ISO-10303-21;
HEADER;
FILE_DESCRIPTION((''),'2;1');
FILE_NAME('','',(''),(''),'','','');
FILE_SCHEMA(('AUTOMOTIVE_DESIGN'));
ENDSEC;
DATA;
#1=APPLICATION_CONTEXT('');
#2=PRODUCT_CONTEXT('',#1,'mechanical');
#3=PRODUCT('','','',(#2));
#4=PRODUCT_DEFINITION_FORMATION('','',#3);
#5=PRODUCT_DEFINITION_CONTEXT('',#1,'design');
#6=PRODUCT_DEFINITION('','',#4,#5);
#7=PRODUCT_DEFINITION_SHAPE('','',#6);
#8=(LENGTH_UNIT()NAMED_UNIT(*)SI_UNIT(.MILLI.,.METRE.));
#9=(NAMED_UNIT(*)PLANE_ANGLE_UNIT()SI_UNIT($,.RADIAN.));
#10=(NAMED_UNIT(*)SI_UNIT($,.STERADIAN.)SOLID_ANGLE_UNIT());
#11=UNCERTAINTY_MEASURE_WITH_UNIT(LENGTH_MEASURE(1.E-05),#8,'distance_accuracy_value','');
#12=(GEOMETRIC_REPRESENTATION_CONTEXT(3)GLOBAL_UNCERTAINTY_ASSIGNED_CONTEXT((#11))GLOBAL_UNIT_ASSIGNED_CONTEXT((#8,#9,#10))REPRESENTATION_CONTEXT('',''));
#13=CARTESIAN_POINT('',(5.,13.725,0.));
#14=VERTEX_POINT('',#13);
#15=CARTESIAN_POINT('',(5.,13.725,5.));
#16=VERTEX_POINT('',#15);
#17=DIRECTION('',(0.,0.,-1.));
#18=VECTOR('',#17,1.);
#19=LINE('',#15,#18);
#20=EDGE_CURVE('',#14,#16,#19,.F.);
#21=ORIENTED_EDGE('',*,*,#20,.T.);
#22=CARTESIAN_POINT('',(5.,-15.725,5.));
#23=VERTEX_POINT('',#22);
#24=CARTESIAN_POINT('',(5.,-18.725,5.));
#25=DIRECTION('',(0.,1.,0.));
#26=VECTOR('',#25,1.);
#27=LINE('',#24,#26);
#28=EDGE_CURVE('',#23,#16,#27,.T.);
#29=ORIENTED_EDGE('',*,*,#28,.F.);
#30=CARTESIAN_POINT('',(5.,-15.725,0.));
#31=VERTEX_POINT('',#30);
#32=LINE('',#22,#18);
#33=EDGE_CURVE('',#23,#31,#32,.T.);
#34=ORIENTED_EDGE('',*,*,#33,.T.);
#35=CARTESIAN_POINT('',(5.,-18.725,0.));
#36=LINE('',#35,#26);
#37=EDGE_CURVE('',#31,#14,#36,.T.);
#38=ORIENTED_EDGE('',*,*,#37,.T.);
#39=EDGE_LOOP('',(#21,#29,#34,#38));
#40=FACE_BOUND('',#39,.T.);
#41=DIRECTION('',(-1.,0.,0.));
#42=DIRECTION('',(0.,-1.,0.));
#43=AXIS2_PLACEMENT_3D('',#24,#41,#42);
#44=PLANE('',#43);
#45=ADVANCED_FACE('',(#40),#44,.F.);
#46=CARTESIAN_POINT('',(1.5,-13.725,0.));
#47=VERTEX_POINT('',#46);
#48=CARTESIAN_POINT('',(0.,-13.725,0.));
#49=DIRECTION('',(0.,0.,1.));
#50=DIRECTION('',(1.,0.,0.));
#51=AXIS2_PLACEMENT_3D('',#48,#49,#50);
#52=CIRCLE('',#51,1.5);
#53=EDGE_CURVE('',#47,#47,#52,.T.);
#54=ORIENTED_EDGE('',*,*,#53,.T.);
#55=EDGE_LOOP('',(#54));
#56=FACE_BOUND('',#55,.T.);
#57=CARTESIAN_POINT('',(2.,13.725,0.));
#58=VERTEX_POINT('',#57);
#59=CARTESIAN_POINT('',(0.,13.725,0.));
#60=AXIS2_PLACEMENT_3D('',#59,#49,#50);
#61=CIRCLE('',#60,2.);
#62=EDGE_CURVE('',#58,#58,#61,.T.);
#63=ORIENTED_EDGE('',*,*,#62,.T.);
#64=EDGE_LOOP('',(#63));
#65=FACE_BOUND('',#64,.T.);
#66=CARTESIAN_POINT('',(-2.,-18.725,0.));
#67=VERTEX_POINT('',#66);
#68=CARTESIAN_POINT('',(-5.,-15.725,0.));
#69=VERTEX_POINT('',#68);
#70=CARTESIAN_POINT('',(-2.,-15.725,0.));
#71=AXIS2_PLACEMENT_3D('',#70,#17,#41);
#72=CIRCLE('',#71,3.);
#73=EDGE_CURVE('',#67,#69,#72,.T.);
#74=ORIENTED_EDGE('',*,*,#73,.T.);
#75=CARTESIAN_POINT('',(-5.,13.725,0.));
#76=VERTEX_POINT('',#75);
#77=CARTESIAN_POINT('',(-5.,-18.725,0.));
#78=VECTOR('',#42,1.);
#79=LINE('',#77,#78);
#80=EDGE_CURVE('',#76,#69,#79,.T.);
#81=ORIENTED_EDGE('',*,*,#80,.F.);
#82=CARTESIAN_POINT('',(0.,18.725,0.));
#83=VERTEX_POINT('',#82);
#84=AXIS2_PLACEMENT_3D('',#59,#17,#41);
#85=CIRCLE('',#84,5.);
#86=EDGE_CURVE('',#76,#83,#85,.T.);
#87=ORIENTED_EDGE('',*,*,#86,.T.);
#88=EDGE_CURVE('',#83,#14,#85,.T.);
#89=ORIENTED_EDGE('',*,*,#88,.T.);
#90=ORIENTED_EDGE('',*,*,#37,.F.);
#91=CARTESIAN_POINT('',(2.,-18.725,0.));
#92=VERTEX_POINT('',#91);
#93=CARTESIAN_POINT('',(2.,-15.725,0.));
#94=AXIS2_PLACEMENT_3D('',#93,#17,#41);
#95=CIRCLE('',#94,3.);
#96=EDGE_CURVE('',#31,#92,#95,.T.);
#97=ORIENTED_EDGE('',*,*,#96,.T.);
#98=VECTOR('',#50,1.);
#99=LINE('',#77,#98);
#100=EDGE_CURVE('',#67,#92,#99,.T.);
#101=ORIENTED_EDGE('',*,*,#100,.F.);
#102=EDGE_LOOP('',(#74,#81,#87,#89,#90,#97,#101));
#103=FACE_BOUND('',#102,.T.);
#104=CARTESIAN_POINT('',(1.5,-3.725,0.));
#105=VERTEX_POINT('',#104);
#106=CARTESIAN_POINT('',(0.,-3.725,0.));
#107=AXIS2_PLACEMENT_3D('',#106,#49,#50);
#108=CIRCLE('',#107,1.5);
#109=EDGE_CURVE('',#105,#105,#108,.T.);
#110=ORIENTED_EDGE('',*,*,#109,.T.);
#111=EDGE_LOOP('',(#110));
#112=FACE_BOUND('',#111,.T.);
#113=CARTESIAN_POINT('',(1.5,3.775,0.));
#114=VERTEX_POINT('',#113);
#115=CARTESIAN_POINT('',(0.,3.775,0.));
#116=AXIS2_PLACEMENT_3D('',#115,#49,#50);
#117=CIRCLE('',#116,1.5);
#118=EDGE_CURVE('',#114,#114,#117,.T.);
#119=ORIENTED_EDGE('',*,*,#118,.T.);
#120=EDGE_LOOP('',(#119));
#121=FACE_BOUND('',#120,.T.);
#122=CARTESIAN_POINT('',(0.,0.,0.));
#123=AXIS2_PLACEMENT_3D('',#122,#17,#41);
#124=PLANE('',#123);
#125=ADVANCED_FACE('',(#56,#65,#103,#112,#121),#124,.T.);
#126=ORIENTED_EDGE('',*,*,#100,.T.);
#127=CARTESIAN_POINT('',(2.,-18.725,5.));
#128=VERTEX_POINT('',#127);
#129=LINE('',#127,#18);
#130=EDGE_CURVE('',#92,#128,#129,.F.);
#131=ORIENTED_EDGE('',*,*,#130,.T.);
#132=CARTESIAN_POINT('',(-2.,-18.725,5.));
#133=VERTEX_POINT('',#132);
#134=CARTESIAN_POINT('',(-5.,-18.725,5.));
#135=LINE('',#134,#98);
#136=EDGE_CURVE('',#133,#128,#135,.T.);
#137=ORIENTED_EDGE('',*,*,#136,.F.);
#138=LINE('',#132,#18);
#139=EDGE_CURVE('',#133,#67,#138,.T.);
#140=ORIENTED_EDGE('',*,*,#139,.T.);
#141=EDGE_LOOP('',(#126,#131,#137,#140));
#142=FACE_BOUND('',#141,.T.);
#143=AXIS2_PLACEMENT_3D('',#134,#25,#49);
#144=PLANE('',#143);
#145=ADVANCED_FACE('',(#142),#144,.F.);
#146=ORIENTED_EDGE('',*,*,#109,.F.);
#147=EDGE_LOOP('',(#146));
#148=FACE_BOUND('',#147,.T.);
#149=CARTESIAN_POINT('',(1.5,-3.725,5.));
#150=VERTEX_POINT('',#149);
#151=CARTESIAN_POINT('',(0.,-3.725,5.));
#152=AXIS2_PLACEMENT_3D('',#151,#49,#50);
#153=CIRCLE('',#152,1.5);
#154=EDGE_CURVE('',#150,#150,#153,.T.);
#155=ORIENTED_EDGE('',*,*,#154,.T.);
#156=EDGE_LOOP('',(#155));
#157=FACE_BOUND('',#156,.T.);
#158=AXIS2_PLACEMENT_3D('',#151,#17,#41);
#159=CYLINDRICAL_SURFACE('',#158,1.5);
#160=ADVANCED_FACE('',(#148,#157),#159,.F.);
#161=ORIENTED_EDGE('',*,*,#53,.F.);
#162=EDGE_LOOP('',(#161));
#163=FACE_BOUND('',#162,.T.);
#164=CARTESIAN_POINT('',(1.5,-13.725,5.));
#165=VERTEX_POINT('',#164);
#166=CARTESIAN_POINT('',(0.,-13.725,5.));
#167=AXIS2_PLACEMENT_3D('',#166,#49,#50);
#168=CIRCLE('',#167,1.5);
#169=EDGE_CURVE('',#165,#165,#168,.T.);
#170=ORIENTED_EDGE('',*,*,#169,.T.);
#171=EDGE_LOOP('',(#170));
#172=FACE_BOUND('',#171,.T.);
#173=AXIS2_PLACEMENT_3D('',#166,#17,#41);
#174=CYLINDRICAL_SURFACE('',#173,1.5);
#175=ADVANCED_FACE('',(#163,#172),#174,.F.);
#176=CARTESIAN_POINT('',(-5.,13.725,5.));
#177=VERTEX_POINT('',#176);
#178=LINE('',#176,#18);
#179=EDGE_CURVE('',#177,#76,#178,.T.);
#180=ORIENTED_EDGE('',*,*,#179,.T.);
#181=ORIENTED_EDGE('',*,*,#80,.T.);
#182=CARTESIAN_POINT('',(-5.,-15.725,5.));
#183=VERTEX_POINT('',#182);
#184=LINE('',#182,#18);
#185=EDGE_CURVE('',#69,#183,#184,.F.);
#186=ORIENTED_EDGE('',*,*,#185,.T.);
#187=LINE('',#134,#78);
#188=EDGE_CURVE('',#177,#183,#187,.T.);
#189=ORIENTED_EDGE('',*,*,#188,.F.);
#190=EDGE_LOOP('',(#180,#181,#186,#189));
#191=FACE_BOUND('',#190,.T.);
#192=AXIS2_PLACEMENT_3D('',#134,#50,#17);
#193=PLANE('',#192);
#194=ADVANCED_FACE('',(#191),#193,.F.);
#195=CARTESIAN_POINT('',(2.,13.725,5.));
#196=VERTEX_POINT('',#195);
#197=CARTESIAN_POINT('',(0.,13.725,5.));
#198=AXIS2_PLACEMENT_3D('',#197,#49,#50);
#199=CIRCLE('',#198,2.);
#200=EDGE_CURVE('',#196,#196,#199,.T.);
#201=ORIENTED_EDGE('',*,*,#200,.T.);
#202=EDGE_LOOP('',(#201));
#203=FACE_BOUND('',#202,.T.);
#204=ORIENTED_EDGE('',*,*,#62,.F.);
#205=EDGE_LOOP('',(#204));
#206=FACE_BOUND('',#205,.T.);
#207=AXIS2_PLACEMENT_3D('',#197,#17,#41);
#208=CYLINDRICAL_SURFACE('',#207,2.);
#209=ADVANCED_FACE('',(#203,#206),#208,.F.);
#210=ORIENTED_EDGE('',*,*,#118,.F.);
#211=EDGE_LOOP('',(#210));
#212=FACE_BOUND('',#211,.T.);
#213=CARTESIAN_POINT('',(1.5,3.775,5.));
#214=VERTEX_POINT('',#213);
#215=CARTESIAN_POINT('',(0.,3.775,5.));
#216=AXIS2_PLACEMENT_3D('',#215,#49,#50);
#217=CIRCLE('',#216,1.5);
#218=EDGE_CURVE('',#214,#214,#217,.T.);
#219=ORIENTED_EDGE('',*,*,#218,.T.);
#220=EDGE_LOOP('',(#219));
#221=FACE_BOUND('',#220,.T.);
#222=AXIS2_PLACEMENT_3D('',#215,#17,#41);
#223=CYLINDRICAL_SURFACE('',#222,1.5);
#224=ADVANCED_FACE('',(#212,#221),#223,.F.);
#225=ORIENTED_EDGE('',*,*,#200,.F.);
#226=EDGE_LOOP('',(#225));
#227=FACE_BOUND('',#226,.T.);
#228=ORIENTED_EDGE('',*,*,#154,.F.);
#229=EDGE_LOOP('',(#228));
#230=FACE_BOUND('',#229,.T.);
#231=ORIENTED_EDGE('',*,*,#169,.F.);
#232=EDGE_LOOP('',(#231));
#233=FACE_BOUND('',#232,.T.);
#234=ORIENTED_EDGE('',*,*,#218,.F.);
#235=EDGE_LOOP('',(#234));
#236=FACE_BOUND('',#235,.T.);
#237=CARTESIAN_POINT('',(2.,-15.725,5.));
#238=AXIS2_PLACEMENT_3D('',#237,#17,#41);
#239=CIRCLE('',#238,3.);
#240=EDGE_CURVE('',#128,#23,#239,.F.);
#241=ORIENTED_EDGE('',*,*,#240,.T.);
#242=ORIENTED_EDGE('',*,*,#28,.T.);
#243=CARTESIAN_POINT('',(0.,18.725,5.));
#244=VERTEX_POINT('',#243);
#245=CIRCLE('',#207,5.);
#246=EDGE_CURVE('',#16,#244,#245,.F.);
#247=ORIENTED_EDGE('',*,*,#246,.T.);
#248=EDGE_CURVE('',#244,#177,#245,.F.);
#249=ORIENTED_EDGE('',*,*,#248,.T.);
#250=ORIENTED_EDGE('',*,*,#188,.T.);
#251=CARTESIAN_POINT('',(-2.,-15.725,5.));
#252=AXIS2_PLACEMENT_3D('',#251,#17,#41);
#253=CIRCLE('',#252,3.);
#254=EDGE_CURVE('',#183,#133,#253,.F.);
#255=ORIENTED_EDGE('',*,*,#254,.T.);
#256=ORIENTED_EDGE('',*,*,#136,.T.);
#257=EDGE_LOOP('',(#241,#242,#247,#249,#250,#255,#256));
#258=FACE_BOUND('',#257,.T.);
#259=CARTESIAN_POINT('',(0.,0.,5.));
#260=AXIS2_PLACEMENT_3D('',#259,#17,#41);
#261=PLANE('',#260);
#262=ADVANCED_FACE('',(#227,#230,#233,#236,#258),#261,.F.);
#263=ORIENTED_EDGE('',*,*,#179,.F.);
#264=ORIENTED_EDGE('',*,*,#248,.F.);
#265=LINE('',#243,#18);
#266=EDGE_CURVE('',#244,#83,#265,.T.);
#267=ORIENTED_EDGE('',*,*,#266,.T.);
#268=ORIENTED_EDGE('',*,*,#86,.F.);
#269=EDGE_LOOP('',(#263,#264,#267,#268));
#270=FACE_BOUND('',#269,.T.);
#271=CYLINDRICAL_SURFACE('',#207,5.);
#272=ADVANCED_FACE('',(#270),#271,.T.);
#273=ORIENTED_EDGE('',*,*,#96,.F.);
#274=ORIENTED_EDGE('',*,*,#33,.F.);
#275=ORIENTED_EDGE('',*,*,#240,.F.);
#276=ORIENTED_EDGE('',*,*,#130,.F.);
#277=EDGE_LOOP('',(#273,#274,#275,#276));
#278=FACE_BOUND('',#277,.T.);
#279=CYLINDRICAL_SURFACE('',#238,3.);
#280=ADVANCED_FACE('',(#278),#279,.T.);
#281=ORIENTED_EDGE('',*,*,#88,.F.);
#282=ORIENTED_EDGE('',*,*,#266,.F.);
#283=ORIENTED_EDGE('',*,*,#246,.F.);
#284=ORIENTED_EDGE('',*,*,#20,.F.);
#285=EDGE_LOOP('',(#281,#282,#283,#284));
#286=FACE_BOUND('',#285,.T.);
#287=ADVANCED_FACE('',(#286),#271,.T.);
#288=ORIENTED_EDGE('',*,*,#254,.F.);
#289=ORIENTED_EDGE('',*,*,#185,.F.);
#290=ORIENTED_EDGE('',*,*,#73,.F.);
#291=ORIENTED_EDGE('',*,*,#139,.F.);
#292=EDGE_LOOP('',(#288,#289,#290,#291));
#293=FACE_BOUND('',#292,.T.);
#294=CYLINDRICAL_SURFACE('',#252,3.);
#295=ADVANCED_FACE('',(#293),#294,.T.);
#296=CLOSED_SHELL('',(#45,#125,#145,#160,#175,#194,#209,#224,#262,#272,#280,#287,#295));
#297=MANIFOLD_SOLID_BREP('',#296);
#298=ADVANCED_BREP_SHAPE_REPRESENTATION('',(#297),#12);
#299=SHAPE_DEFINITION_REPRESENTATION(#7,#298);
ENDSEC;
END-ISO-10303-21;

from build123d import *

# Parameters (mm, degrees)
SKETCH_1_W      = 10
SKETCH_1_H      = 37.45
SKETCH_1_R      = 1.5
SKETCH_1_R_2    = 2
EXTRUDE_1_DEPTH = 5
FILLET_1_R      = 5
FILLET_2_R      = 3


with BuildPart() as part:
    # ｽｹｯﾁ1 → ﾎﾞｽ - 押し出し1 (new body)
    with BuildSketch(Plane.XY):
        Rectangle(SKETCH_1_W, SKETCH_1_H)
        with Locations((0, -13.725)):
            Circle(SKETCH_1_R, mode=Mode.SUBTRACT)
        with Locations((0, -3.725)):
            Circle(SKETCH_1_R, mode=Mode.SUBTRACT)
        with Locations((0, 13.725)):
            Circle(SKETCH_1_R_2, mode=Mode.SUBTRACT)
        with Locations((0, 3.775)):
            Circle(SKETCH_1_R, mode=Mode.SUBTRACT)
    extrude(amount=EXTRUDE_1_DEPTH)

    # ﾌｨﾚｯﾄ1
    fillet_1_edges = [part.edges().sort_by_distance(p)[0] for p in [
        (5, 18.725, 2.5),
        (-5, 18.725, 2.5),
    ]]
    fillet(fillet_1_edges, radius=FILLET_1_R - 0.0001)  # a hair under: the kernel refuses the full size

    # ﾌｨﾚｯﾄ2
    fillet_2_edges = [part.edges().sort_by_distance(p)[0] for p in [
        (5, -18.725, 2.5),
        (-5, -18.725, 2.5),
    ]]
    fillet(fillet_2_edges, radius=FILLET_2_R)


solid = part.part
